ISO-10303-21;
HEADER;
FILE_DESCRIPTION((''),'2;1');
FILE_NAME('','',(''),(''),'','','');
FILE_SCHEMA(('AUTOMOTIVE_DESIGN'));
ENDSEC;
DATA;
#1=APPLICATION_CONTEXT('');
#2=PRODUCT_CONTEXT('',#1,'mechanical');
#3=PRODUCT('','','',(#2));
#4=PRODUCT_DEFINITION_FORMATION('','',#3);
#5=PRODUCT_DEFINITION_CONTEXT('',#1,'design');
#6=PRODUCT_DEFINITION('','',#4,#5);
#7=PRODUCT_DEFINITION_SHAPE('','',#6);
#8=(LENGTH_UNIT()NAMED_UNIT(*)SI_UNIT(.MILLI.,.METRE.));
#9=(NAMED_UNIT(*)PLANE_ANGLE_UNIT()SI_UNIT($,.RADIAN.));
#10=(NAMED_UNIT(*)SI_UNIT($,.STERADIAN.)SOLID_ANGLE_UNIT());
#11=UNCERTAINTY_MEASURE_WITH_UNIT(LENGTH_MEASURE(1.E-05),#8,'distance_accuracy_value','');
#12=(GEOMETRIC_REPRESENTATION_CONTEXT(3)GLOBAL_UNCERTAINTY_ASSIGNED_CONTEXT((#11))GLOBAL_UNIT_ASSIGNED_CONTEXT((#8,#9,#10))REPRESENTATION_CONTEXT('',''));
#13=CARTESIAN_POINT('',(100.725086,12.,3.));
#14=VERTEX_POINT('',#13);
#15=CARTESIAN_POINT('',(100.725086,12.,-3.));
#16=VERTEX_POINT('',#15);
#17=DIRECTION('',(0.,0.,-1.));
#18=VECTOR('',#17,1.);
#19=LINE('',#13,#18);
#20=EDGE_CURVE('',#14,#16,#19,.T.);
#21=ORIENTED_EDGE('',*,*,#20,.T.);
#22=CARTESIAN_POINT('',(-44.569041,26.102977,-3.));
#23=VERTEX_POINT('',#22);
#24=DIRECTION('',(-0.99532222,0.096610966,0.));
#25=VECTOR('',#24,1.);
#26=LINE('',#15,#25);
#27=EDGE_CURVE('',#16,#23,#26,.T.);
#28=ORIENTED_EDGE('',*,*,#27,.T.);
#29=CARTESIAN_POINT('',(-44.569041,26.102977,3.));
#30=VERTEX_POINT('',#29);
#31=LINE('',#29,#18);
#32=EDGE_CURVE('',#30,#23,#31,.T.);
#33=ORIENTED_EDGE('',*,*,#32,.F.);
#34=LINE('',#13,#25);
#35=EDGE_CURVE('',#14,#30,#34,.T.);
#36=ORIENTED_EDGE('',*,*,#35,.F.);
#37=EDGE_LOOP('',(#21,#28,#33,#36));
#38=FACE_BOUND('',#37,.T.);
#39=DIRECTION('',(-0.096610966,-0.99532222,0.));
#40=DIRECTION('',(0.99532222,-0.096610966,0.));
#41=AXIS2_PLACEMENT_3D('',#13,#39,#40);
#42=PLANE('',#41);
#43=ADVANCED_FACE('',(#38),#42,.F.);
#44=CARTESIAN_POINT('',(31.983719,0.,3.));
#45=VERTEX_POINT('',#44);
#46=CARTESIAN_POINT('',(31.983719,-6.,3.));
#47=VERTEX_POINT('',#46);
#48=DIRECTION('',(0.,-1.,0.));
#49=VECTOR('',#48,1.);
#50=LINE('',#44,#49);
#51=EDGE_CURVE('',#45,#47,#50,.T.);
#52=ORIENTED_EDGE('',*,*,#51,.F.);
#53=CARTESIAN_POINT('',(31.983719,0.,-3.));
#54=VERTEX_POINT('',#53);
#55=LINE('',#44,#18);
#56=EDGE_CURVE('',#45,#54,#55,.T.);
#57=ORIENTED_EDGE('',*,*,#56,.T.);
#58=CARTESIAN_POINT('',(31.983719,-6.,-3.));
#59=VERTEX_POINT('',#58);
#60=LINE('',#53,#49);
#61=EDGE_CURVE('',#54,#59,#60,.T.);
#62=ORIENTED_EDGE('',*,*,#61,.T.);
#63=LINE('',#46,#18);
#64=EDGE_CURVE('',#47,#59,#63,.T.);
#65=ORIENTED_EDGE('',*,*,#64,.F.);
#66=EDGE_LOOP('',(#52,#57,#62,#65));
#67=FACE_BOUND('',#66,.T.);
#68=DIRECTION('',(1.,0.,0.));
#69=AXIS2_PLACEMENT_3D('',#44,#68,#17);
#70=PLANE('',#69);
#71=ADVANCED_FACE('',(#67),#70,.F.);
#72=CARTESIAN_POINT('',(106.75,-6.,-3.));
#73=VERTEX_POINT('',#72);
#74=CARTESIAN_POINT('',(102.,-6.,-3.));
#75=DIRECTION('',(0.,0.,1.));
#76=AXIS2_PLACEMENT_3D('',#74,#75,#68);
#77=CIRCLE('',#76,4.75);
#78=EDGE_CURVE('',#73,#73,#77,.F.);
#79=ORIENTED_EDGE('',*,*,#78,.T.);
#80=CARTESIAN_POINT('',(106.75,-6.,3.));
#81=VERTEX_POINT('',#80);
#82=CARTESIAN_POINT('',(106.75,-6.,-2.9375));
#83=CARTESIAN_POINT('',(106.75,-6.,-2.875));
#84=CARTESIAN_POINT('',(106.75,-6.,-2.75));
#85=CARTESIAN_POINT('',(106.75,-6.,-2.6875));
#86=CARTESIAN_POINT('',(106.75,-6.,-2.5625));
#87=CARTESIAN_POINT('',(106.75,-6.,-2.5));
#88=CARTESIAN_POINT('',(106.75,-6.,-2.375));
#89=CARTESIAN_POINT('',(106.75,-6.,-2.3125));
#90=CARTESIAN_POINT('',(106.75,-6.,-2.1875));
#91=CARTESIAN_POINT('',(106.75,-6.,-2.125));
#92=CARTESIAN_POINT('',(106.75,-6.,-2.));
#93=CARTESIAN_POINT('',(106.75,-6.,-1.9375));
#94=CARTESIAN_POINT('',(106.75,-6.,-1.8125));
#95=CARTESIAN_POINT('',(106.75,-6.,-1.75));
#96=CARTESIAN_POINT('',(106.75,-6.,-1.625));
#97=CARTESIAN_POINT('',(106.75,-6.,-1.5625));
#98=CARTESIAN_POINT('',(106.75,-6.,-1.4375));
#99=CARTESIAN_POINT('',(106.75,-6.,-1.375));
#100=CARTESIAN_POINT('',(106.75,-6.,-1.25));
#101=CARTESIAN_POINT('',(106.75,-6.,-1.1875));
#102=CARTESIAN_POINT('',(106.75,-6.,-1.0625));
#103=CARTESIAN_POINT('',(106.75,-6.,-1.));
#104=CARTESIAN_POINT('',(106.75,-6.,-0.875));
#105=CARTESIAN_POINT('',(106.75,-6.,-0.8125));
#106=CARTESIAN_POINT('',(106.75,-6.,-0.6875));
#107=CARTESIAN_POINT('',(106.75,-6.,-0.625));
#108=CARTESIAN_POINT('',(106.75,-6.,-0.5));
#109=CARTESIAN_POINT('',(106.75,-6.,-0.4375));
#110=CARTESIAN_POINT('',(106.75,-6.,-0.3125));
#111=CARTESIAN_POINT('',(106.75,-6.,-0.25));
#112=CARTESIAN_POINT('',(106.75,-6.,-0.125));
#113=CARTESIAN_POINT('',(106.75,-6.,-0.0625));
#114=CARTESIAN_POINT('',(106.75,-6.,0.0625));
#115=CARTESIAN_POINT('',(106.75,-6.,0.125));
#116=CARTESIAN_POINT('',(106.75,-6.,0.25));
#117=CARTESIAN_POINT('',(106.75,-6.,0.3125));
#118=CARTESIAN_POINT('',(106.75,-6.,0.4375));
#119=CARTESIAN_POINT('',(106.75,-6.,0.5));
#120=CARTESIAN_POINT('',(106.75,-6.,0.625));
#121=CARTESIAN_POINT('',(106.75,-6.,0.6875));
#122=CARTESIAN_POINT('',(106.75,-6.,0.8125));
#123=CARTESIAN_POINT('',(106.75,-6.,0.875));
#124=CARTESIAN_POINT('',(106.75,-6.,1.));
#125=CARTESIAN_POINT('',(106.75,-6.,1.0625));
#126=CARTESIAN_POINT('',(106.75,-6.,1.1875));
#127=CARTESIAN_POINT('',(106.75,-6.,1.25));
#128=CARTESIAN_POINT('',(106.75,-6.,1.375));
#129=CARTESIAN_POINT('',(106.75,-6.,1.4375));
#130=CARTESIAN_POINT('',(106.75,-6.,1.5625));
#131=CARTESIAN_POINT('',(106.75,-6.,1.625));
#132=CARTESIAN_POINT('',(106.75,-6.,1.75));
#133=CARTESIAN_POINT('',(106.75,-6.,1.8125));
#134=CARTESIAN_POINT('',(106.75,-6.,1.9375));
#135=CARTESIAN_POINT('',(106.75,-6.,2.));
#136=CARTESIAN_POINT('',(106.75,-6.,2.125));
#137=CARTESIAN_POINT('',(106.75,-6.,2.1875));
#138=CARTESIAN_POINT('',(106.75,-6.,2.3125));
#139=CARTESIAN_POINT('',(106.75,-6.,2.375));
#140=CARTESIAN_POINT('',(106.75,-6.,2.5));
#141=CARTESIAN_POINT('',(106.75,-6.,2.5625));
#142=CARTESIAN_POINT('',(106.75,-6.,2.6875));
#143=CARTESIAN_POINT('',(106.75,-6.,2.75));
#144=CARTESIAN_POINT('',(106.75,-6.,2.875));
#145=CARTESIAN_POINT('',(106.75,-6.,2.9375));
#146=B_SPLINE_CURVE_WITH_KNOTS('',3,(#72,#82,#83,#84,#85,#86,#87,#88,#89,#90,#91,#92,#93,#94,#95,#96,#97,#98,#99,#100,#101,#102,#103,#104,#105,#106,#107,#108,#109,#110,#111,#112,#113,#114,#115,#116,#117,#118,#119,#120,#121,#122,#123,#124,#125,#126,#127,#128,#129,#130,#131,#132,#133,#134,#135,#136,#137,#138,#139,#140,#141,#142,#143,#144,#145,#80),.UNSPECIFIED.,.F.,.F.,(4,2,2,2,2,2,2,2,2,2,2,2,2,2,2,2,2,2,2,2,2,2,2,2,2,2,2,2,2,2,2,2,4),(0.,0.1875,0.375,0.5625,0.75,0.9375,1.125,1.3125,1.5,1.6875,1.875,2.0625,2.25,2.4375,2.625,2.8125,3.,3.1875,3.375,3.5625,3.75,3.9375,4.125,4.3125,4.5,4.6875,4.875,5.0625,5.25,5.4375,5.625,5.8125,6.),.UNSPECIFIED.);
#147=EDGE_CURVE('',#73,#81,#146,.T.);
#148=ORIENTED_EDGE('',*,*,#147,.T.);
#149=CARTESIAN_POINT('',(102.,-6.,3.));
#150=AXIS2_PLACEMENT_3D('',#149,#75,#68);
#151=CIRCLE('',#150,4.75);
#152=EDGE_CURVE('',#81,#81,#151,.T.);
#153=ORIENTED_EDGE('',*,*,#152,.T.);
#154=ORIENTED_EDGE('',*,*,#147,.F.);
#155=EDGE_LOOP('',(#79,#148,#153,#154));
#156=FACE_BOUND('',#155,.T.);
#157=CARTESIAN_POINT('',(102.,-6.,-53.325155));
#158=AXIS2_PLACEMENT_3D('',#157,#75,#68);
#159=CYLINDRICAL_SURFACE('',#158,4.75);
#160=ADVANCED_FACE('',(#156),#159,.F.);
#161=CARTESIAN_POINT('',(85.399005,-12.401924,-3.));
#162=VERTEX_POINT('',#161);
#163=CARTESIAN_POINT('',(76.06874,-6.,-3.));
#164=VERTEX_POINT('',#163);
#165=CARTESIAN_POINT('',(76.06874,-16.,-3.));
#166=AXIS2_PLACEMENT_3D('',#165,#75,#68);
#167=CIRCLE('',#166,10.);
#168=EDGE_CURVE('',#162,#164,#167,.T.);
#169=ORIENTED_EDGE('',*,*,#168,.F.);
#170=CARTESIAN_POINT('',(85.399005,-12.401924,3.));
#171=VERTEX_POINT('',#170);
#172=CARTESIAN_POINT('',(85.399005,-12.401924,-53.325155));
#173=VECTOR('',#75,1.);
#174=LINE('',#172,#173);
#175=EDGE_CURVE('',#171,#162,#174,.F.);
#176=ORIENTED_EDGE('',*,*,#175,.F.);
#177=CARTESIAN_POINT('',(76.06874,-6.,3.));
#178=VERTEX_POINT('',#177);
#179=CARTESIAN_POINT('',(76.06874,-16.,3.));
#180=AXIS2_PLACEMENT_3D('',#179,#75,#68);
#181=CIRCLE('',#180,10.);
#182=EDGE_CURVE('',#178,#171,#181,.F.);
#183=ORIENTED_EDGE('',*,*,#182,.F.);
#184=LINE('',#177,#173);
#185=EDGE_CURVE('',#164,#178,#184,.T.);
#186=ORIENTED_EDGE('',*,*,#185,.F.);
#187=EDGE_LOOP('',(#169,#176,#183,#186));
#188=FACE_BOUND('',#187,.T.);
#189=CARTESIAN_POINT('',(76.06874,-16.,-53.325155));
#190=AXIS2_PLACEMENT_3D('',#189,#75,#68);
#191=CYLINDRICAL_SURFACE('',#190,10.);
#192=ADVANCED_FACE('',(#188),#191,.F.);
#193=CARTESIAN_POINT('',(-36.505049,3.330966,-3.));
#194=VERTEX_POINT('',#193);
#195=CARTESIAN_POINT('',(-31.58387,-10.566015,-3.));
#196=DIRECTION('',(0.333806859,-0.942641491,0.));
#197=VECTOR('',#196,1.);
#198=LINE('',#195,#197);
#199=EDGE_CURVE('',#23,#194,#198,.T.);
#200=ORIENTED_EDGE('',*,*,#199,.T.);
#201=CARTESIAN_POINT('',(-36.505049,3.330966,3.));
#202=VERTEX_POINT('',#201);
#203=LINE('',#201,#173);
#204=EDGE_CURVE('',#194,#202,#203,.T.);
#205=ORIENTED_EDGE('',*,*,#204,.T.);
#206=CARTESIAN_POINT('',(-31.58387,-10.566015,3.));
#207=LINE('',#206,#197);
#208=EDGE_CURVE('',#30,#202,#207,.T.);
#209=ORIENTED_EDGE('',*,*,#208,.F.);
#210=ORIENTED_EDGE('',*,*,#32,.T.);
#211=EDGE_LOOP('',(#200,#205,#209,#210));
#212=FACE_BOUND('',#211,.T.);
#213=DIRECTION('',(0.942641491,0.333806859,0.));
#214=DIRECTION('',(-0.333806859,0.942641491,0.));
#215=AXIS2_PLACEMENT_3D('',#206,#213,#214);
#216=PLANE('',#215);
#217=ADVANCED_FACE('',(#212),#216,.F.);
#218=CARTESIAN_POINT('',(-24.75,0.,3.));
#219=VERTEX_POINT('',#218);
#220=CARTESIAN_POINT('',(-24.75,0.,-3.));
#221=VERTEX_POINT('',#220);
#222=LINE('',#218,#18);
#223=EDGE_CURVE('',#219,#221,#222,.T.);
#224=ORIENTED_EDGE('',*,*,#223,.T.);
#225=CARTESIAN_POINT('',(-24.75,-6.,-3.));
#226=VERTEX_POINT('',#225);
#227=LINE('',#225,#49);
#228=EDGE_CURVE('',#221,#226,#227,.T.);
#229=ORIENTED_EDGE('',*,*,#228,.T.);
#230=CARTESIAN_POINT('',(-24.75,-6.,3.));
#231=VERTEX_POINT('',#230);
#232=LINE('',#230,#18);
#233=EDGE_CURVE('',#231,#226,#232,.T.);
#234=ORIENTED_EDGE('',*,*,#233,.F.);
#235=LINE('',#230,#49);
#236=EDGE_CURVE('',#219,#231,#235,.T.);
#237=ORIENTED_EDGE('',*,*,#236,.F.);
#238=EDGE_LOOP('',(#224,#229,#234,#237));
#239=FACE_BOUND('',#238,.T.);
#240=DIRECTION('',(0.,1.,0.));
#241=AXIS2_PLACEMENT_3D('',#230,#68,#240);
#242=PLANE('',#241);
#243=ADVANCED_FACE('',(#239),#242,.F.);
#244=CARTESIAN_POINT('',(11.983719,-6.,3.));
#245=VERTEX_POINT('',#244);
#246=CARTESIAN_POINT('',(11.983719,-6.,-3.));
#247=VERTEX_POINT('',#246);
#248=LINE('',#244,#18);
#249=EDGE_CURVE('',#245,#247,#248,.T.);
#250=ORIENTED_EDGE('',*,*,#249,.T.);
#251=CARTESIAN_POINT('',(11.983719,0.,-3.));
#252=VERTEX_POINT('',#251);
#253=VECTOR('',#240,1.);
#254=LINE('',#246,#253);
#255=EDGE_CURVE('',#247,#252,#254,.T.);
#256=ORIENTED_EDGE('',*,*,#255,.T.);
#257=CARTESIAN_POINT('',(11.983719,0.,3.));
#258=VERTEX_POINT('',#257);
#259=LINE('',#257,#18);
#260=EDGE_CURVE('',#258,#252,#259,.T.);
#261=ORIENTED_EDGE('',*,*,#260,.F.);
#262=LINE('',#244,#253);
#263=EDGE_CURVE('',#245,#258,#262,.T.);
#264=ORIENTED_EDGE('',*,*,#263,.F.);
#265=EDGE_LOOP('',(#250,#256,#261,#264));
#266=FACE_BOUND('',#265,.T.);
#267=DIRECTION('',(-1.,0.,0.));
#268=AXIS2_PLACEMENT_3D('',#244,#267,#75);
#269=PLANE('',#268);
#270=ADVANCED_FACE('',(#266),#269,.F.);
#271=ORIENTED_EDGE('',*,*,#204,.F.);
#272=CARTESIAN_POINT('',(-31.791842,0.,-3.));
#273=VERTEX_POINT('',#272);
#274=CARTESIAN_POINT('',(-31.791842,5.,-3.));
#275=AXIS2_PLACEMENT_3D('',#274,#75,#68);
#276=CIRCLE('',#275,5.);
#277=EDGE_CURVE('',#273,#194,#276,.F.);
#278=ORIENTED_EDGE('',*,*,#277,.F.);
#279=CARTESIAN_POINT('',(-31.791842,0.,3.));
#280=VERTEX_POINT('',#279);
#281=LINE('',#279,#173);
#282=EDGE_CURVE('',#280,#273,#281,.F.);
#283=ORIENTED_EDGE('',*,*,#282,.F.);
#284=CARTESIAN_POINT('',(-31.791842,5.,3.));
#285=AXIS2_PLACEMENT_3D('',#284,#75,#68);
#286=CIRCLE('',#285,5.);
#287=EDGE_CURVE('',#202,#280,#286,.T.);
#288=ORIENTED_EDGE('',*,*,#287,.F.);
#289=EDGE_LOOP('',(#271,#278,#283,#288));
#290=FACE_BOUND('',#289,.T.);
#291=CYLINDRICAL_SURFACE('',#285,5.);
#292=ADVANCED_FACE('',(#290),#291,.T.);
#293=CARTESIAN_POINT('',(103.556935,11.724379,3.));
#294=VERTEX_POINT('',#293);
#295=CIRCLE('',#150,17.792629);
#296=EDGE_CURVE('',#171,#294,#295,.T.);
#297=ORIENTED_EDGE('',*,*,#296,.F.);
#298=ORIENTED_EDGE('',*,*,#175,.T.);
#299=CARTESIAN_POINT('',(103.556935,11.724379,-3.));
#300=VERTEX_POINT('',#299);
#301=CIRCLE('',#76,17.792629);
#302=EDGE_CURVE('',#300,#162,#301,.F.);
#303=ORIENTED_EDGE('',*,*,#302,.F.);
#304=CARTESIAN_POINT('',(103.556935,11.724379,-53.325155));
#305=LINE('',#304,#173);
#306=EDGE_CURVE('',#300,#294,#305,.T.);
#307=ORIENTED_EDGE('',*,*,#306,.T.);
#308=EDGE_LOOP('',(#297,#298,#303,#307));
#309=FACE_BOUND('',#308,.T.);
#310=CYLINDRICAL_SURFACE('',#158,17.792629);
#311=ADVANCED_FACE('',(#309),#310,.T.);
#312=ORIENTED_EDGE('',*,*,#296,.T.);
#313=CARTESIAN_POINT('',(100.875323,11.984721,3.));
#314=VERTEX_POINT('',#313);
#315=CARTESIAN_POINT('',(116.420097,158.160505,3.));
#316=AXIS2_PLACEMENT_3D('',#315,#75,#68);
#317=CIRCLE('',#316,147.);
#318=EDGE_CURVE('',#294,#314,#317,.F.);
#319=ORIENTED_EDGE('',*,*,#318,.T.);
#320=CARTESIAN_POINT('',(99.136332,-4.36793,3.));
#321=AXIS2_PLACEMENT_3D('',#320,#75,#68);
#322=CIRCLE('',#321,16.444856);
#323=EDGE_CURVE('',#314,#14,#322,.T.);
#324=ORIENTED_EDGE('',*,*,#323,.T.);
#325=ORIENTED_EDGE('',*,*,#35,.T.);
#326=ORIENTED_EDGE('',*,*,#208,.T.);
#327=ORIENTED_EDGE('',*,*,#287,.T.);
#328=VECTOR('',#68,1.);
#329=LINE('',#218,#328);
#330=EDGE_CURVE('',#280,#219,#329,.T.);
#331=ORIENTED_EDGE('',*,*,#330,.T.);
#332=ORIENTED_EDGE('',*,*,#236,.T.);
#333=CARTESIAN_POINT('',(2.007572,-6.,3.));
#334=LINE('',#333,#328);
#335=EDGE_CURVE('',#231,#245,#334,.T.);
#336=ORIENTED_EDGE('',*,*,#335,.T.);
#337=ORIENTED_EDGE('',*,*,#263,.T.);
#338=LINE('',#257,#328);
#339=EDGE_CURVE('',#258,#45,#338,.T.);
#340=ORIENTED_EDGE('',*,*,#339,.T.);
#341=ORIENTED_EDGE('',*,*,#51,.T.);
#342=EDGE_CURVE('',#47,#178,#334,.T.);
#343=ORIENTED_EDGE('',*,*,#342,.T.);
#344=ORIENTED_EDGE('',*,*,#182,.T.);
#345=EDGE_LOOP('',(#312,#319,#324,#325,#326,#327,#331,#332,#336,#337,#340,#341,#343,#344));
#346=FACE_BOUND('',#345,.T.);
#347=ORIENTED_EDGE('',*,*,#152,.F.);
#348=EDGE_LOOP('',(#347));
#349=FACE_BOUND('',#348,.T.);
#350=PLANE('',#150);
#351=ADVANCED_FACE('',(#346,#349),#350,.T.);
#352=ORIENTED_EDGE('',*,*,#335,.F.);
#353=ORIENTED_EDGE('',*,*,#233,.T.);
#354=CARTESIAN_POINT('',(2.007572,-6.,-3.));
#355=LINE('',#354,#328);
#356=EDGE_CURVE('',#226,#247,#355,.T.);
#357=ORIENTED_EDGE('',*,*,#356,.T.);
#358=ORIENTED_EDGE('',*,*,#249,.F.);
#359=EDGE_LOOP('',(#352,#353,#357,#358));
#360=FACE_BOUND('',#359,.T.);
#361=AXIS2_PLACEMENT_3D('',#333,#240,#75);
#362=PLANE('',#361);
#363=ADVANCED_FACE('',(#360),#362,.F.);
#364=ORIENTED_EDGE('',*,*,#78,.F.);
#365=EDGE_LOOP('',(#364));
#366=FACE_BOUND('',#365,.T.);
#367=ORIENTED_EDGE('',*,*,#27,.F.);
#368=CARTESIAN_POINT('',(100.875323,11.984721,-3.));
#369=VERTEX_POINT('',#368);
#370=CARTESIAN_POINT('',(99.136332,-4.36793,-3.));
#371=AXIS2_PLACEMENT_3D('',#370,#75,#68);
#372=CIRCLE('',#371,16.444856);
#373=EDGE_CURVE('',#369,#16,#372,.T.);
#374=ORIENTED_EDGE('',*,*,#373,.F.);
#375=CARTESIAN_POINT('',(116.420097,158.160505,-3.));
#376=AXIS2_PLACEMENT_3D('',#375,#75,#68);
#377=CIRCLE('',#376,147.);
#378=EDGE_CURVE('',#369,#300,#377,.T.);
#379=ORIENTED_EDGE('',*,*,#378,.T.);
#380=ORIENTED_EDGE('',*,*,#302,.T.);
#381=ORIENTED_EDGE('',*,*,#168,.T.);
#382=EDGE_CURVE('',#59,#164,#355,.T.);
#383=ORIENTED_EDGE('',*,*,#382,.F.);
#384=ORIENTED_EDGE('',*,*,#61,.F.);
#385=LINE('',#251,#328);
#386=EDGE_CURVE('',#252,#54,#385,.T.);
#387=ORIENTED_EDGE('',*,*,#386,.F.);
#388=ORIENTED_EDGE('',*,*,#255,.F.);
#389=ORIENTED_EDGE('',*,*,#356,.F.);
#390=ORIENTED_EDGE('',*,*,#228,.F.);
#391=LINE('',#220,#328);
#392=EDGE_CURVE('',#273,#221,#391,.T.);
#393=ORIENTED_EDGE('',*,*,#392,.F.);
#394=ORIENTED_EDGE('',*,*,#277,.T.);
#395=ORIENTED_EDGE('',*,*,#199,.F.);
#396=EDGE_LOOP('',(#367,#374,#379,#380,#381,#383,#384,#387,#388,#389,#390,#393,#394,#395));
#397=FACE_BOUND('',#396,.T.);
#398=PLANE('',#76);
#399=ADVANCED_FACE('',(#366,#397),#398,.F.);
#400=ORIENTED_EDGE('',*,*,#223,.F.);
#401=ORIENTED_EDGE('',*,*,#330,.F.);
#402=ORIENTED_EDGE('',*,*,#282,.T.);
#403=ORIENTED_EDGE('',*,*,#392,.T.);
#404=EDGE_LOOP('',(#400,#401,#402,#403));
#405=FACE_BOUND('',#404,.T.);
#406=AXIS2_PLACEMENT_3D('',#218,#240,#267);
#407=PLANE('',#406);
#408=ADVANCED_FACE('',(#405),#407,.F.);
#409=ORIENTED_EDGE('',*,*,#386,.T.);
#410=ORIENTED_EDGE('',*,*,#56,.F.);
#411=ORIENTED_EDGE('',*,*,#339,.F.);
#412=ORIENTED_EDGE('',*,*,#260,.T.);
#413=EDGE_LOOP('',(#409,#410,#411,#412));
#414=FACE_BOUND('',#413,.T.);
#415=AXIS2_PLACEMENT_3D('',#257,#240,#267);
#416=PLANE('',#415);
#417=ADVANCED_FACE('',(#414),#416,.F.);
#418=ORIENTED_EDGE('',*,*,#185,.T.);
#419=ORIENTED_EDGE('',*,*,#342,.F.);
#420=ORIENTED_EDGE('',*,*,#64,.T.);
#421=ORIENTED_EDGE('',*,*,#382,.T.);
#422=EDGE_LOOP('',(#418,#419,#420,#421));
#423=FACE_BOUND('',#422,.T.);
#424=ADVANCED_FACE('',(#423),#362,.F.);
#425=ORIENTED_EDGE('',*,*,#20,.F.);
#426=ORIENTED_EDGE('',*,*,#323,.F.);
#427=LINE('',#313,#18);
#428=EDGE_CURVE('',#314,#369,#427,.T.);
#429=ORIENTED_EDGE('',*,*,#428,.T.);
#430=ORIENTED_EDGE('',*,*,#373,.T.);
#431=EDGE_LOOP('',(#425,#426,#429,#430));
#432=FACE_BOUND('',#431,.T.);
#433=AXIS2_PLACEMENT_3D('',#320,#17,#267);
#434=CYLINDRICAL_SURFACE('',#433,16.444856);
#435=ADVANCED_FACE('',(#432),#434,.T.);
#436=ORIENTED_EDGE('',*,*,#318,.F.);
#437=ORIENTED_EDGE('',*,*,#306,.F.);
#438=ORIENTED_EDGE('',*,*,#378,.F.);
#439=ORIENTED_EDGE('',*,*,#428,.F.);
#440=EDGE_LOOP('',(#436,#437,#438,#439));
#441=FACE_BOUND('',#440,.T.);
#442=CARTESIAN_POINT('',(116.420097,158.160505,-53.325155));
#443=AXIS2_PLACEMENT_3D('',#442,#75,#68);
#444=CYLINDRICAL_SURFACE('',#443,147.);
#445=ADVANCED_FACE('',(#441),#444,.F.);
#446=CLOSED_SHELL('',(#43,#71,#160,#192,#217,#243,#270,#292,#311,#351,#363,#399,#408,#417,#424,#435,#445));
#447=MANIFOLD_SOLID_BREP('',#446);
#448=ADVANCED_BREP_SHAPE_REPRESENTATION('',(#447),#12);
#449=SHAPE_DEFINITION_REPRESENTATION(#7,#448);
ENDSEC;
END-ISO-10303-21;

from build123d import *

# Parameters (mm, degrees)
SKETCH1_R           = 5.5
BOSS_EXTRUDE1_DEPTH = 3
MOVE_START          = -3
MOVE_FACE1_DEPTH    = 6
SKETCH3_R           = 17.792629247
SKETCH3_R_2         = 4.75
BOSS_EXTRUDE3_DEPTH = 6
FILLET3_R           = 147
FILLET4_R           = 10
SKETCH5_W           = 25
SKETCH5_H           = 6
SKETCH5_W_2         = 20
CUT_EXTRUDE1_DEPTH  = 123.739451528
MOVE_FACE2_DEPTH    = 6
FILLET5_R           = 5


with BuildPart() as part:
    # Sketch1 → Boss-Extrude1 (new, symmetric)
    with BuildSketch(Plane.XY):
        with BuildLine():
            Line((100.725085642, 12), (-7.531031869, 22.507881701))
            Line((-7.531031869, 22.507881701), (0, 0))
            Line((0, 0), (2.007571917, -6))
            Line((2.007571917, -6), (88.851239866, -6))
            ThreePointArc((88.851239866, -6), (98.632352269, -18.710186538), (113.423722773, -12.510641371))
            ThreePointArc((113.423722773, -12.510641371), (113.737903109, 3.196949424), (100.725085642, 12))
        make_face()
        with Locations((102, -6)):
            Circle(SKETCH1_R, mode=Mode.SUBTRACT)
    extrude(amount=BOSS_EXTRUDE1_DEPTH, both=True)

    # Move Face1: read off the stored shape, not the designer's step
    # Move Face1 outline → Move Face1 (add)
    with BuildSketch(Plane.XY.offset(MOVE_START)):
        Polygon((-7.531031869, 22.5078817), (-44.042319528, 26.051850395), (-33.317920404, -6), (2.007571917, -6), align=None)
    extrude(amount=MOVE_FACE1_DEPTH)

    # Sketch3 → Boss-Extrude3 (add)
    with BuildSketch(Plane.XY.offset(3)):
        with Locations((102, -6)):
            Circle(SKETCH3_R)
        with Locations((102, -6)):
            Circle(SKETCH3_R_2, mode=Mode.SUBTRACT)
    extrude(amount=-BOSS_EXTRUDE3_DEPTH)

    # Fillet3
    fillet3_edges = [part.edges().sort_by_distance(p)[0] for p in [
        (102.186094391, 11.791656034, 0),
    ]]
    fillet(fillet3_edges, radius=FILLET3_R)

    # Fillet4
    fillet4_edges = [part.edges().sort_by_distance(p)[0] for p in [
        (84.207370753, -6, 0),
    ]]
    fillet(fillet4_edges, radius=FILLET4_R)

    # Sketch5 → Cut-Extrude1 (cut, through all)
    with BuildSketch(Plane(origin=(0, 0, -3), x_dir=(-1, 0, 0), z_dir=(0, 0, -1))):
        with Locations((37.25, -3)):
            Rectangle(SKETCH5_W, SKETCH5_H)
        with Locations((-21.983719278, -3)):
            Rectangle(SKETCH5_W_2, SKETCH5_H)
    extrude(amount=-CUT_EXTRUDE1_DEPTH, mode=Mode.SUBTRACT)

    # Move Face2: read off the stored shape, not the designer's step
    # Move Face2 outline → Move Face2 (add)
    with BuildSketch(Plane.XY.offset(MOVE_START)):
        Polygon((-44.569041147, 26.102976637), (-35.325492321, 0), (-44.042319528, 26.051850395), align=None)
    extrude(amount=MOVE_FACE2_DEPTH)

    # Fillet5
    fillet5_edges = [part.edges().sort_by_distance(p)[0] for p in [
        (-35.325492321, 0, 0),
    ]]
    fillet(fillet5_edges, radius=FILLET5_R)


solid = part.part
